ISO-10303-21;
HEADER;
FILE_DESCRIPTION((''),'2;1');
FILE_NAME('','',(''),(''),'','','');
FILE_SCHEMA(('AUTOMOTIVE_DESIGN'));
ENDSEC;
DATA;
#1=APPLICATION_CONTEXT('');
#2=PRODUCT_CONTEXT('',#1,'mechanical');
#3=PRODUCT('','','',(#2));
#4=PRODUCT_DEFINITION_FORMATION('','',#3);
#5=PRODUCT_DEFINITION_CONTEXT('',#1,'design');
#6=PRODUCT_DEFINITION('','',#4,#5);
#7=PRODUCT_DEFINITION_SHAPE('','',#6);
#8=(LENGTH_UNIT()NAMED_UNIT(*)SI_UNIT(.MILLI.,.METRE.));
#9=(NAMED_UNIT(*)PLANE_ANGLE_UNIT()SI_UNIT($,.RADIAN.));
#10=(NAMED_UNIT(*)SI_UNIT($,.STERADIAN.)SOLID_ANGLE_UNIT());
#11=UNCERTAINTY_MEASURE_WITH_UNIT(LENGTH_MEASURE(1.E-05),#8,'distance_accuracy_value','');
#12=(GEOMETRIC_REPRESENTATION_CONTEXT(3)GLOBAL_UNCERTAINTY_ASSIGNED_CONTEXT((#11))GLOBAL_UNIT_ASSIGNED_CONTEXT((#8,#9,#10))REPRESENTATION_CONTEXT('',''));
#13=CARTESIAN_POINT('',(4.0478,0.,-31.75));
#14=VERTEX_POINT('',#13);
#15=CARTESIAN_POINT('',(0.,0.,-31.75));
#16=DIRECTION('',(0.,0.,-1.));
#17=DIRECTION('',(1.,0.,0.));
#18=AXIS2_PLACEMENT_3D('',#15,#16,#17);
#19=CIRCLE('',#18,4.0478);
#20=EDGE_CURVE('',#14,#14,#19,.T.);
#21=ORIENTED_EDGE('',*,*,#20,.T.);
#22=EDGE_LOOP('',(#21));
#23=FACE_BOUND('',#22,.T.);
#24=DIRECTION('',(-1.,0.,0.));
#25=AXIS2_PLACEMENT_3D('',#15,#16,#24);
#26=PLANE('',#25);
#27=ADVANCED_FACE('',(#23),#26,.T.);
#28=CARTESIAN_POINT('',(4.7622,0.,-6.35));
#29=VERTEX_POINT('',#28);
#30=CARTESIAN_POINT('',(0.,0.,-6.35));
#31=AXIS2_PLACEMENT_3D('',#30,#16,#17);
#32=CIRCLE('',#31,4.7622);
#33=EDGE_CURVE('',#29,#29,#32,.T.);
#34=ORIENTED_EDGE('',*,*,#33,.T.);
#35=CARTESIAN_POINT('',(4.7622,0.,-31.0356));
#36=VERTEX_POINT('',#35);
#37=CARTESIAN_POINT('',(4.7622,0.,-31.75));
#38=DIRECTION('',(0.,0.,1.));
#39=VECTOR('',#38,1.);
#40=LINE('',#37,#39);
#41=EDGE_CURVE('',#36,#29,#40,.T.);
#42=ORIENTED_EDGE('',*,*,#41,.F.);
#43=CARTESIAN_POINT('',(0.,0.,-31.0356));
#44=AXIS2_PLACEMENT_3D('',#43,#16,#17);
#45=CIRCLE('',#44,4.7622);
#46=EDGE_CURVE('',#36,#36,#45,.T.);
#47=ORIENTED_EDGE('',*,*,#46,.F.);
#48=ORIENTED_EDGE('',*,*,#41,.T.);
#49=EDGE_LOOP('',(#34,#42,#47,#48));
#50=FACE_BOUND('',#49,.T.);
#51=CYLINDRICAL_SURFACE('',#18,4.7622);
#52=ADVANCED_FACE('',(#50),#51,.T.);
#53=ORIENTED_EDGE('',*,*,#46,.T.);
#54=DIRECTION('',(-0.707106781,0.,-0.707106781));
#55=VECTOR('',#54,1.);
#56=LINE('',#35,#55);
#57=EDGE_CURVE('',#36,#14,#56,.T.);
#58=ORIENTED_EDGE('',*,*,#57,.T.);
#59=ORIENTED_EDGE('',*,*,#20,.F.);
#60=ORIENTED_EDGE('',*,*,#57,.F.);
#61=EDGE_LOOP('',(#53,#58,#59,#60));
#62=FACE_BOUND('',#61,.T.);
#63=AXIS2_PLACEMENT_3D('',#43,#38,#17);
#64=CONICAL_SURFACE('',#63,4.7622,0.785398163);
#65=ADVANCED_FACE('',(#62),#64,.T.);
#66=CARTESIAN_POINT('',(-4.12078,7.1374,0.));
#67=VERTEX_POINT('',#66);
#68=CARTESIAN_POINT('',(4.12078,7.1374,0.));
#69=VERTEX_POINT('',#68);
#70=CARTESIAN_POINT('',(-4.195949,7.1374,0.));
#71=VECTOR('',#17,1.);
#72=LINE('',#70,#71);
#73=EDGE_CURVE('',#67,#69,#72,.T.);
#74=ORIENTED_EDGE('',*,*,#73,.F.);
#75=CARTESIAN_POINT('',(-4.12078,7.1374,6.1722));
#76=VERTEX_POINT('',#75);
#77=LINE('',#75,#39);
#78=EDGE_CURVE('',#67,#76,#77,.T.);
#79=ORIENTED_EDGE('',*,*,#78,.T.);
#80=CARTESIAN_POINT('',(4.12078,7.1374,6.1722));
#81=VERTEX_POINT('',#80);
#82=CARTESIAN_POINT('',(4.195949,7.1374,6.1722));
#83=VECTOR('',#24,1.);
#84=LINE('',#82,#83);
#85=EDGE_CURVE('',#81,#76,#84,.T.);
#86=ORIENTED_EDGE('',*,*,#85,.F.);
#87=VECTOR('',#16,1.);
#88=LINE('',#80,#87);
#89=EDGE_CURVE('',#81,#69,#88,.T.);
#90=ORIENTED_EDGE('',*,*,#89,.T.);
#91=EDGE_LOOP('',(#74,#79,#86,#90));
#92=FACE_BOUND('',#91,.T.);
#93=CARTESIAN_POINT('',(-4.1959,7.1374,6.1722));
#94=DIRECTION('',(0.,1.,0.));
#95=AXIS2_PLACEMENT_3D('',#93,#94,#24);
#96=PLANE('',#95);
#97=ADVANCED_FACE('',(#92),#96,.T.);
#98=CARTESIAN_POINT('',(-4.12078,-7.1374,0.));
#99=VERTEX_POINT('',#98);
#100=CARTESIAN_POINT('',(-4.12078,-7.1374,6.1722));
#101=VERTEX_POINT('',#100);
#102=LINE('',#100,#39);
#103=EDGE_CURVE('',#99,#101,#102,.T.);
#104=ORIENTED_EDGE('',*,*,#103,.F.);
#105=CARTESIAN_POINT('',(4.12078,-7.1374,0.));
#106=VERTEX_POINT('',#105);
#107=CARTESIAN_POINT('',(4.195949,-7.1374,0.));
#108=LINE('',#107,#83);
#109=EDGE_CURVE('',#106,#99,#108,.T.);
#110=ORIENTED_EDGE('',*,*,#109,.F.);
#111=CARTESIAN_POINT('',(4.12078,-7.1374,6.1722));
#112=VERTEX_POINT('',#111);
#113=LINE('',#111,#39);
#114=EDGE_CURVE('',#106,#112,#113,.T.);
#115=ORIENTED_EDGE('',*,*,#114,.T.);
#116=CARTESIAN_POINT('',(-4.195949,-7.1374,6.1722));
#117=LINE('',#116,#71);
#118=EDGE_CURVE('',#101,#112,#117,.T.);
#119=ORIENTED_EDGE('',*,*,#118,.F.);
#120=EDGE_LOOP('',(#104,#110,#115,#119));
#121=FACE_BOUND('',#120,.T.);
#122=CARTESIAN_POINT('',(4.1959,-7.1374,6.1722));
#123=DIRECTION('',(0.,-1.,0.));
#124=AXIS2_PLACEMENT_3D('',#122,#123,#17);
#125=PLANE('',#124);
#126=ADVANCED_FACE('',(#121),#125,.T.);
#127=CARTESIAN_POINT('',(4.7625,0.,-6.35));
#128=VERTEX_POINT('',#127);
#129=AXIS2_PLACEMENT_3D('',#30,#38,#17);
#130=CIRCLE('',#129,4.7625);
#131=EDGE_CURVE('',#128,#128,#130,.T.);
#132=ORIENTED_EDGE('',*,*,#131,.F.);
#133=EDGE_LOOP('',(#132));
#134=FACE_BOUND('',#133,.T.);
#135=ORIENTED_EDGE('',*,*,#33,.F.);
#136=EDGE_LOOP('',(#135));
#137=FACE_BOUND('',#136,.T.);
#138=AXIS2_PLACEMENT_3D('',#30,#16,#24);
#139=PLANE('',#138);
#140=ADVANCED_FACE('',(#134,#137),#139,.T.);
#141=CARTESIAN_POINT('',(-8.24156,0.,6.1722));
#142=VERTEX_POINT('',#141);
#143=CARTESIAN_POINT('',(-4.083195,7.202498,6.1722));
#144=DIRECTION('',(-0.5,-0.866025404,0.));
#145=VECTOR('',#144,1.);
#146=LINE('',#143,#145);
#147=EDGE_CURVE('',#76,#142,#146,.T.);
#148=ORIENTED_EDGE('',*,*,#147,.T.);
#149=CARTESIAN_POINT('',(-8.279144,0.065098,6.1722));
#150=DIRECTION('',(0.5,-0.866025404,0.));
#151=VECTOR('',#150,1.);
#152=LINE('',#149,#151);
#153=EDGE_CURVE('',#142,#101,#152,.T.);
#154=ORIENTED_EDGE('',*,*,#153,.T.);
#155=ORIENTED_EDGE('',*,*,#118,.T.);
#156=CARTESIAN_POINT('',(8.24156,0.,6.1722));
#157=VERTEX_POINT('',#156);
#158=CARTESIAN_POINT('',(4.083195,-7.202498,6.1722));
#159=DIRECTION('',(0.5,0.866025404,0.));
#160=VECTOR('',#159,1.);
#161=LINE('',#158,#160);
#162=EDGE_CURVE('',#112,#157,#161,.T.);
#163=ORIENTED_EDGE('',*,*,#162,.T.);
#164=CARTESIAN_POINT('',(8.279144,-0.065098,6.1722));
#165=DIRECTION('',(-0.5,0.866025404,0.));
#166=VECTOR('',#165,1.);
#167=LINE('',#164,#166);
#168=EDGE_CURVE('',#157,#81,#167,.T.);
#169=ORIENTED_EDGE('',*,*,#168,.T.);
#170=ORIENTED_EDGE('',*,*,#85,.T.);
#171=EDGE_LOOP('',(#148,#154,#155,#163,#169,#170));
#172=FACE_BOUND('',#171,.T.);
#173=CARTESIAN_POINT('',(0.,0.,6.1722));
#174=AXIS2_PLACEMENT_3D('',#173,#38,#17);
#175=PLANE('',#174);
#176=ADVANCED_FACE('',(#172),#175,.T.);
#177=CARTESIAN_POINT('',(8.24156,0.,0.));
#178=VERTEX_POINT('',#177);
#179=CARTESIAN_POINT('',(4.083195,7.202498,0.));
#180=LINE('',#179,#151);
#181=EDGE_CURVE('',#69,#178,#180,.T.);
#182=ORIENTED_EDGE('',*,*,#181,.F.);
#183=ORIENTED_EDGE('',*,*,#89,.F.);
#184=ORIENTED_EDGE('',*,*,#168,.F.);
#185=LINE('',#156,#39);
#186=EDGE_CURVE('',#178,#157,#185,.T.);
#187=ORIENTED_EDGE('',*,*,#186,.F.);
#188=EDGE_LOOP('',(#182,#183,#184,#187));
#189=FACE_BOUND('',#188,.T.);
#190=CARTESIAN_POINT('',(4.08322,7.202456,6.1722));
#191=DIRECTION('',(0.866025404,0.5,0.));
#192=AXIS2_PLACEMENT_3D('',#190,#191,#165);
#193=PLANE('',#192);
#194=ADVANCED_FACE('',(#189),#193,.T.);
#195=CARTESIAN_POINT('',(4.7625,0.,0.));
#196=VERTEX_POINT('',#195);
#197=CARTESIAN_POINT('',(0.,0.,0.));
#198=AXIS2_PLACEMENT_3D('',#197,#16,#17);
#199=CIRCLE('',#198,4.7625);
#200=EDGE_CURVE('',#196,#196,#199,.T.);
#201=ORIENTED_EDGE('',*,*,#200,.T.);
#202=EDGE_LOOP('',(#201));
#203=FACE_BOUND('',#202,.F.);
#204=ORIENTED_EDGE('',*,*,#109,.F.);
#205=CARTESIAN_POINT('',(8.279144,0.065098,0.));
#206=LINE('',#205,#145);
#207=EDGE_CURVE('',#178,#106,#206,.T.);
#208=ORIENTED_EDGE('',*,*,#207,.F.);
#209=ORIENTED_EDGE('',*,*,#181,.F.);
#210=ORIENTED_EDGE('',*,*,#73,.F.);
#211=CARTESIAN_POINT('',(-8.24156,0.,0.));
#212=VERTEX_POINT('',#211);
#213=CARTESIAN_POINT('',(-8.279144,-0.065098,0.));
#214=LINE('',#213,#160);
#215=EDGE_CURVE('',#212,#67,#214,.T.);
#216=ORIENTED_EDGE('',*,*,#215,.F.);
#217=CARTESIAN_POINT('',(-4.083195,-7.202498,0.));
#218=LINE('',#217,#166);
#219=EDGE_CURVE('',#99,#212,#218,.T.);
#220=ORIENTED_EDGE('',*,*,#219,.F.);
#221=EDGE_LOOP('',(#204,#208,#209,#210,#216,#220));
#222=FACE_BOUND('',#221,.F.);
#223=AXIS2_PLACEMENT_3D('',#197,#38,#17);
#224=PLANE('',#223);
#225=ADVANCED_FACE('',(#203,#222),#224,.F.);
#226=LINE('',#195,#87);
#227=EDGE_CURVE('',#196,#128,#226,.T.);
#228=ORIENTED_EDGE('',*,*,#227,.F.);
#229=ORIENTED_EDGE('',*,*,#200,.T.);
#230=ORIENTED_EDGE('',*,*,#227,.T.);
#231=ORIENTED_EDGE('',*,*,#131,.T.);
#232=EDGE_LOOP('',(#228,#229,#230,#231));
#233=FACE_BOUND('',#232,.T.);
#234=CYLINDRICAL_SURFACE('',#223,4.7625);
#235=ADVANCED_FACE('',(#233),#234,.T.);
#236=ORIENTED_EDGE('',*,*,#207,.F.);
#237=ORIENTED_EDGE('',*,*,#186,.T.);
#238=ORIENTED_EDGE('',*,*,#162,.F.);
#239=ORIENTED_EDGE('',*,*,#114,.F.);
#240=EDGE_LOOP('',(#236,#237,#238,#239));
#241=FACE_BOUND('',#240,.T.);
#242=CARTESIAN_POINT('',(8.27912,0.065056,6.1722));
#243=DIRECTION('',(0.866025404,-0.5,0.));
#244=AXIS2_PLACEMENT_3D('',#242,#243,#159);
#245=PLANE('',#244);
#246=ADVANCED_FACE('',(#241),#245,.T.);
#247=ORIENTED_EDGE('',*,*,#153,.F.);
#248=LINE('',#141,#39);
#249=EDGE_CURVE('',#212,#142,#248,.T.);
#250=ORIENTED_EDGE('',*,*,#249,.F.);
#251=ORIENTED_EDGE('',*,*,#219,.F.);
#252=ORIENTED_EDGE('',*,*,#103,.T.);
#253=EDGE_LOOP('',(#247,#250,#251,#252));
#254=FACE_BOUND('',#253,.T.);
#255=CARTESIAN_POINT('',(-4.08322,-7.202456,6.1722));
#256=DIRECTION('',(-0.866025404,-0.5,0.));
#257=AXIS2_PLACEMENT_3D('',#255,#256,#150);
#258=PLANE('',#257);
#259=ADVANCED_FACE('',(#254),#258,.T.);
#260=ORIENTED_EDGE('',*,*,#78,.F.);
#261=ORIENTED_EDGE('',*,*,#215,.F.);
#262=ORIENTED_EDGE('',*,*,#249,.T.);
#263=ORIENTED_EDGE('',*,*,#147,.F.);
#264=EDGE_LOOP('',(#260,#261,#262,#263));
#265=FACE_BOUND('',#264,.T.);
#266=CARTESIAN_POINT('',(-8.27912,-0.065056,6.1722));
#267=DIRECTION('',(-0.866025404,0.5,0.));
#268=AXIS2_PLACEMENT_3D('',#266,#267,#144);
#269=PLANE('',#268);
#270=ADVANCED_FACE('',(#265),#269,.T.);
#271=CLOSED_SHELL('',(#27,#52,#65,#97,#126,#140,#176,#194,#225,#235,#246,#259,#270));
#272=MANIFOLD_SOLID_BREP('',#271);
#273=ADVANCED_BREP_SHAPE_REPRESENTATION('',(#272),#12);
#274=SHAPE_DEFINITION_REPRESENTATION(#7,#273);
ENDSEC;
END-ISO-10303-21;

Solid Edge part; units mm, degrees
sketch "Sketch1" plane through (0, 0, 0) normal (0, 0, 1) x (1, 0, 0)
  circle A0 centre (0, 0) radius 8.2794
  dimension "D1" = 16.5588
extrude "Protrusion1" add sketch "Sketch1" along normal blind 6.1722
sketch "Sketch2" plane through (0, 0, 0) normal (0, 0, -1) x (1, 0, 0)
  circle A0 centre (0, 0) radius 4.7625
extrude "Protrusion2" add sketch "Sketch2" along normal blind 31.75
sketch "Sketch3" plane through (0, 0, -31.75) normal (0, 0, -1) x (1, 0, 0)
  circle A0 centre (0, 0) radius 4.7622
extrude "Cutout1" cut sketch "Sketch3" against normal blind 25.4 flip side to cut
chamfer "Chamfer_1" distance 0.7144 angle 45 1 edges at (-4.7622, 0, -31.75)
sketch "Sketch4" plane through (0, 0, 6.1722) normal (0, 0, 1) x (1, 0, 0)
  line L0 (-4.1959, 7.1374) -> (4.1959, 7.1374)
  dimension "D1" = 14.2748
extrude "Cutout2" cut sketch "Sketch4" against normal up to next material side at (0, 7.1874, 6.1722)
pattern_circular "Pattern1" count 6 over 360 about axis through (0, 0, 6.1722) along (0, 0, 1) of "Cutout2"
properties part number "24102218"
